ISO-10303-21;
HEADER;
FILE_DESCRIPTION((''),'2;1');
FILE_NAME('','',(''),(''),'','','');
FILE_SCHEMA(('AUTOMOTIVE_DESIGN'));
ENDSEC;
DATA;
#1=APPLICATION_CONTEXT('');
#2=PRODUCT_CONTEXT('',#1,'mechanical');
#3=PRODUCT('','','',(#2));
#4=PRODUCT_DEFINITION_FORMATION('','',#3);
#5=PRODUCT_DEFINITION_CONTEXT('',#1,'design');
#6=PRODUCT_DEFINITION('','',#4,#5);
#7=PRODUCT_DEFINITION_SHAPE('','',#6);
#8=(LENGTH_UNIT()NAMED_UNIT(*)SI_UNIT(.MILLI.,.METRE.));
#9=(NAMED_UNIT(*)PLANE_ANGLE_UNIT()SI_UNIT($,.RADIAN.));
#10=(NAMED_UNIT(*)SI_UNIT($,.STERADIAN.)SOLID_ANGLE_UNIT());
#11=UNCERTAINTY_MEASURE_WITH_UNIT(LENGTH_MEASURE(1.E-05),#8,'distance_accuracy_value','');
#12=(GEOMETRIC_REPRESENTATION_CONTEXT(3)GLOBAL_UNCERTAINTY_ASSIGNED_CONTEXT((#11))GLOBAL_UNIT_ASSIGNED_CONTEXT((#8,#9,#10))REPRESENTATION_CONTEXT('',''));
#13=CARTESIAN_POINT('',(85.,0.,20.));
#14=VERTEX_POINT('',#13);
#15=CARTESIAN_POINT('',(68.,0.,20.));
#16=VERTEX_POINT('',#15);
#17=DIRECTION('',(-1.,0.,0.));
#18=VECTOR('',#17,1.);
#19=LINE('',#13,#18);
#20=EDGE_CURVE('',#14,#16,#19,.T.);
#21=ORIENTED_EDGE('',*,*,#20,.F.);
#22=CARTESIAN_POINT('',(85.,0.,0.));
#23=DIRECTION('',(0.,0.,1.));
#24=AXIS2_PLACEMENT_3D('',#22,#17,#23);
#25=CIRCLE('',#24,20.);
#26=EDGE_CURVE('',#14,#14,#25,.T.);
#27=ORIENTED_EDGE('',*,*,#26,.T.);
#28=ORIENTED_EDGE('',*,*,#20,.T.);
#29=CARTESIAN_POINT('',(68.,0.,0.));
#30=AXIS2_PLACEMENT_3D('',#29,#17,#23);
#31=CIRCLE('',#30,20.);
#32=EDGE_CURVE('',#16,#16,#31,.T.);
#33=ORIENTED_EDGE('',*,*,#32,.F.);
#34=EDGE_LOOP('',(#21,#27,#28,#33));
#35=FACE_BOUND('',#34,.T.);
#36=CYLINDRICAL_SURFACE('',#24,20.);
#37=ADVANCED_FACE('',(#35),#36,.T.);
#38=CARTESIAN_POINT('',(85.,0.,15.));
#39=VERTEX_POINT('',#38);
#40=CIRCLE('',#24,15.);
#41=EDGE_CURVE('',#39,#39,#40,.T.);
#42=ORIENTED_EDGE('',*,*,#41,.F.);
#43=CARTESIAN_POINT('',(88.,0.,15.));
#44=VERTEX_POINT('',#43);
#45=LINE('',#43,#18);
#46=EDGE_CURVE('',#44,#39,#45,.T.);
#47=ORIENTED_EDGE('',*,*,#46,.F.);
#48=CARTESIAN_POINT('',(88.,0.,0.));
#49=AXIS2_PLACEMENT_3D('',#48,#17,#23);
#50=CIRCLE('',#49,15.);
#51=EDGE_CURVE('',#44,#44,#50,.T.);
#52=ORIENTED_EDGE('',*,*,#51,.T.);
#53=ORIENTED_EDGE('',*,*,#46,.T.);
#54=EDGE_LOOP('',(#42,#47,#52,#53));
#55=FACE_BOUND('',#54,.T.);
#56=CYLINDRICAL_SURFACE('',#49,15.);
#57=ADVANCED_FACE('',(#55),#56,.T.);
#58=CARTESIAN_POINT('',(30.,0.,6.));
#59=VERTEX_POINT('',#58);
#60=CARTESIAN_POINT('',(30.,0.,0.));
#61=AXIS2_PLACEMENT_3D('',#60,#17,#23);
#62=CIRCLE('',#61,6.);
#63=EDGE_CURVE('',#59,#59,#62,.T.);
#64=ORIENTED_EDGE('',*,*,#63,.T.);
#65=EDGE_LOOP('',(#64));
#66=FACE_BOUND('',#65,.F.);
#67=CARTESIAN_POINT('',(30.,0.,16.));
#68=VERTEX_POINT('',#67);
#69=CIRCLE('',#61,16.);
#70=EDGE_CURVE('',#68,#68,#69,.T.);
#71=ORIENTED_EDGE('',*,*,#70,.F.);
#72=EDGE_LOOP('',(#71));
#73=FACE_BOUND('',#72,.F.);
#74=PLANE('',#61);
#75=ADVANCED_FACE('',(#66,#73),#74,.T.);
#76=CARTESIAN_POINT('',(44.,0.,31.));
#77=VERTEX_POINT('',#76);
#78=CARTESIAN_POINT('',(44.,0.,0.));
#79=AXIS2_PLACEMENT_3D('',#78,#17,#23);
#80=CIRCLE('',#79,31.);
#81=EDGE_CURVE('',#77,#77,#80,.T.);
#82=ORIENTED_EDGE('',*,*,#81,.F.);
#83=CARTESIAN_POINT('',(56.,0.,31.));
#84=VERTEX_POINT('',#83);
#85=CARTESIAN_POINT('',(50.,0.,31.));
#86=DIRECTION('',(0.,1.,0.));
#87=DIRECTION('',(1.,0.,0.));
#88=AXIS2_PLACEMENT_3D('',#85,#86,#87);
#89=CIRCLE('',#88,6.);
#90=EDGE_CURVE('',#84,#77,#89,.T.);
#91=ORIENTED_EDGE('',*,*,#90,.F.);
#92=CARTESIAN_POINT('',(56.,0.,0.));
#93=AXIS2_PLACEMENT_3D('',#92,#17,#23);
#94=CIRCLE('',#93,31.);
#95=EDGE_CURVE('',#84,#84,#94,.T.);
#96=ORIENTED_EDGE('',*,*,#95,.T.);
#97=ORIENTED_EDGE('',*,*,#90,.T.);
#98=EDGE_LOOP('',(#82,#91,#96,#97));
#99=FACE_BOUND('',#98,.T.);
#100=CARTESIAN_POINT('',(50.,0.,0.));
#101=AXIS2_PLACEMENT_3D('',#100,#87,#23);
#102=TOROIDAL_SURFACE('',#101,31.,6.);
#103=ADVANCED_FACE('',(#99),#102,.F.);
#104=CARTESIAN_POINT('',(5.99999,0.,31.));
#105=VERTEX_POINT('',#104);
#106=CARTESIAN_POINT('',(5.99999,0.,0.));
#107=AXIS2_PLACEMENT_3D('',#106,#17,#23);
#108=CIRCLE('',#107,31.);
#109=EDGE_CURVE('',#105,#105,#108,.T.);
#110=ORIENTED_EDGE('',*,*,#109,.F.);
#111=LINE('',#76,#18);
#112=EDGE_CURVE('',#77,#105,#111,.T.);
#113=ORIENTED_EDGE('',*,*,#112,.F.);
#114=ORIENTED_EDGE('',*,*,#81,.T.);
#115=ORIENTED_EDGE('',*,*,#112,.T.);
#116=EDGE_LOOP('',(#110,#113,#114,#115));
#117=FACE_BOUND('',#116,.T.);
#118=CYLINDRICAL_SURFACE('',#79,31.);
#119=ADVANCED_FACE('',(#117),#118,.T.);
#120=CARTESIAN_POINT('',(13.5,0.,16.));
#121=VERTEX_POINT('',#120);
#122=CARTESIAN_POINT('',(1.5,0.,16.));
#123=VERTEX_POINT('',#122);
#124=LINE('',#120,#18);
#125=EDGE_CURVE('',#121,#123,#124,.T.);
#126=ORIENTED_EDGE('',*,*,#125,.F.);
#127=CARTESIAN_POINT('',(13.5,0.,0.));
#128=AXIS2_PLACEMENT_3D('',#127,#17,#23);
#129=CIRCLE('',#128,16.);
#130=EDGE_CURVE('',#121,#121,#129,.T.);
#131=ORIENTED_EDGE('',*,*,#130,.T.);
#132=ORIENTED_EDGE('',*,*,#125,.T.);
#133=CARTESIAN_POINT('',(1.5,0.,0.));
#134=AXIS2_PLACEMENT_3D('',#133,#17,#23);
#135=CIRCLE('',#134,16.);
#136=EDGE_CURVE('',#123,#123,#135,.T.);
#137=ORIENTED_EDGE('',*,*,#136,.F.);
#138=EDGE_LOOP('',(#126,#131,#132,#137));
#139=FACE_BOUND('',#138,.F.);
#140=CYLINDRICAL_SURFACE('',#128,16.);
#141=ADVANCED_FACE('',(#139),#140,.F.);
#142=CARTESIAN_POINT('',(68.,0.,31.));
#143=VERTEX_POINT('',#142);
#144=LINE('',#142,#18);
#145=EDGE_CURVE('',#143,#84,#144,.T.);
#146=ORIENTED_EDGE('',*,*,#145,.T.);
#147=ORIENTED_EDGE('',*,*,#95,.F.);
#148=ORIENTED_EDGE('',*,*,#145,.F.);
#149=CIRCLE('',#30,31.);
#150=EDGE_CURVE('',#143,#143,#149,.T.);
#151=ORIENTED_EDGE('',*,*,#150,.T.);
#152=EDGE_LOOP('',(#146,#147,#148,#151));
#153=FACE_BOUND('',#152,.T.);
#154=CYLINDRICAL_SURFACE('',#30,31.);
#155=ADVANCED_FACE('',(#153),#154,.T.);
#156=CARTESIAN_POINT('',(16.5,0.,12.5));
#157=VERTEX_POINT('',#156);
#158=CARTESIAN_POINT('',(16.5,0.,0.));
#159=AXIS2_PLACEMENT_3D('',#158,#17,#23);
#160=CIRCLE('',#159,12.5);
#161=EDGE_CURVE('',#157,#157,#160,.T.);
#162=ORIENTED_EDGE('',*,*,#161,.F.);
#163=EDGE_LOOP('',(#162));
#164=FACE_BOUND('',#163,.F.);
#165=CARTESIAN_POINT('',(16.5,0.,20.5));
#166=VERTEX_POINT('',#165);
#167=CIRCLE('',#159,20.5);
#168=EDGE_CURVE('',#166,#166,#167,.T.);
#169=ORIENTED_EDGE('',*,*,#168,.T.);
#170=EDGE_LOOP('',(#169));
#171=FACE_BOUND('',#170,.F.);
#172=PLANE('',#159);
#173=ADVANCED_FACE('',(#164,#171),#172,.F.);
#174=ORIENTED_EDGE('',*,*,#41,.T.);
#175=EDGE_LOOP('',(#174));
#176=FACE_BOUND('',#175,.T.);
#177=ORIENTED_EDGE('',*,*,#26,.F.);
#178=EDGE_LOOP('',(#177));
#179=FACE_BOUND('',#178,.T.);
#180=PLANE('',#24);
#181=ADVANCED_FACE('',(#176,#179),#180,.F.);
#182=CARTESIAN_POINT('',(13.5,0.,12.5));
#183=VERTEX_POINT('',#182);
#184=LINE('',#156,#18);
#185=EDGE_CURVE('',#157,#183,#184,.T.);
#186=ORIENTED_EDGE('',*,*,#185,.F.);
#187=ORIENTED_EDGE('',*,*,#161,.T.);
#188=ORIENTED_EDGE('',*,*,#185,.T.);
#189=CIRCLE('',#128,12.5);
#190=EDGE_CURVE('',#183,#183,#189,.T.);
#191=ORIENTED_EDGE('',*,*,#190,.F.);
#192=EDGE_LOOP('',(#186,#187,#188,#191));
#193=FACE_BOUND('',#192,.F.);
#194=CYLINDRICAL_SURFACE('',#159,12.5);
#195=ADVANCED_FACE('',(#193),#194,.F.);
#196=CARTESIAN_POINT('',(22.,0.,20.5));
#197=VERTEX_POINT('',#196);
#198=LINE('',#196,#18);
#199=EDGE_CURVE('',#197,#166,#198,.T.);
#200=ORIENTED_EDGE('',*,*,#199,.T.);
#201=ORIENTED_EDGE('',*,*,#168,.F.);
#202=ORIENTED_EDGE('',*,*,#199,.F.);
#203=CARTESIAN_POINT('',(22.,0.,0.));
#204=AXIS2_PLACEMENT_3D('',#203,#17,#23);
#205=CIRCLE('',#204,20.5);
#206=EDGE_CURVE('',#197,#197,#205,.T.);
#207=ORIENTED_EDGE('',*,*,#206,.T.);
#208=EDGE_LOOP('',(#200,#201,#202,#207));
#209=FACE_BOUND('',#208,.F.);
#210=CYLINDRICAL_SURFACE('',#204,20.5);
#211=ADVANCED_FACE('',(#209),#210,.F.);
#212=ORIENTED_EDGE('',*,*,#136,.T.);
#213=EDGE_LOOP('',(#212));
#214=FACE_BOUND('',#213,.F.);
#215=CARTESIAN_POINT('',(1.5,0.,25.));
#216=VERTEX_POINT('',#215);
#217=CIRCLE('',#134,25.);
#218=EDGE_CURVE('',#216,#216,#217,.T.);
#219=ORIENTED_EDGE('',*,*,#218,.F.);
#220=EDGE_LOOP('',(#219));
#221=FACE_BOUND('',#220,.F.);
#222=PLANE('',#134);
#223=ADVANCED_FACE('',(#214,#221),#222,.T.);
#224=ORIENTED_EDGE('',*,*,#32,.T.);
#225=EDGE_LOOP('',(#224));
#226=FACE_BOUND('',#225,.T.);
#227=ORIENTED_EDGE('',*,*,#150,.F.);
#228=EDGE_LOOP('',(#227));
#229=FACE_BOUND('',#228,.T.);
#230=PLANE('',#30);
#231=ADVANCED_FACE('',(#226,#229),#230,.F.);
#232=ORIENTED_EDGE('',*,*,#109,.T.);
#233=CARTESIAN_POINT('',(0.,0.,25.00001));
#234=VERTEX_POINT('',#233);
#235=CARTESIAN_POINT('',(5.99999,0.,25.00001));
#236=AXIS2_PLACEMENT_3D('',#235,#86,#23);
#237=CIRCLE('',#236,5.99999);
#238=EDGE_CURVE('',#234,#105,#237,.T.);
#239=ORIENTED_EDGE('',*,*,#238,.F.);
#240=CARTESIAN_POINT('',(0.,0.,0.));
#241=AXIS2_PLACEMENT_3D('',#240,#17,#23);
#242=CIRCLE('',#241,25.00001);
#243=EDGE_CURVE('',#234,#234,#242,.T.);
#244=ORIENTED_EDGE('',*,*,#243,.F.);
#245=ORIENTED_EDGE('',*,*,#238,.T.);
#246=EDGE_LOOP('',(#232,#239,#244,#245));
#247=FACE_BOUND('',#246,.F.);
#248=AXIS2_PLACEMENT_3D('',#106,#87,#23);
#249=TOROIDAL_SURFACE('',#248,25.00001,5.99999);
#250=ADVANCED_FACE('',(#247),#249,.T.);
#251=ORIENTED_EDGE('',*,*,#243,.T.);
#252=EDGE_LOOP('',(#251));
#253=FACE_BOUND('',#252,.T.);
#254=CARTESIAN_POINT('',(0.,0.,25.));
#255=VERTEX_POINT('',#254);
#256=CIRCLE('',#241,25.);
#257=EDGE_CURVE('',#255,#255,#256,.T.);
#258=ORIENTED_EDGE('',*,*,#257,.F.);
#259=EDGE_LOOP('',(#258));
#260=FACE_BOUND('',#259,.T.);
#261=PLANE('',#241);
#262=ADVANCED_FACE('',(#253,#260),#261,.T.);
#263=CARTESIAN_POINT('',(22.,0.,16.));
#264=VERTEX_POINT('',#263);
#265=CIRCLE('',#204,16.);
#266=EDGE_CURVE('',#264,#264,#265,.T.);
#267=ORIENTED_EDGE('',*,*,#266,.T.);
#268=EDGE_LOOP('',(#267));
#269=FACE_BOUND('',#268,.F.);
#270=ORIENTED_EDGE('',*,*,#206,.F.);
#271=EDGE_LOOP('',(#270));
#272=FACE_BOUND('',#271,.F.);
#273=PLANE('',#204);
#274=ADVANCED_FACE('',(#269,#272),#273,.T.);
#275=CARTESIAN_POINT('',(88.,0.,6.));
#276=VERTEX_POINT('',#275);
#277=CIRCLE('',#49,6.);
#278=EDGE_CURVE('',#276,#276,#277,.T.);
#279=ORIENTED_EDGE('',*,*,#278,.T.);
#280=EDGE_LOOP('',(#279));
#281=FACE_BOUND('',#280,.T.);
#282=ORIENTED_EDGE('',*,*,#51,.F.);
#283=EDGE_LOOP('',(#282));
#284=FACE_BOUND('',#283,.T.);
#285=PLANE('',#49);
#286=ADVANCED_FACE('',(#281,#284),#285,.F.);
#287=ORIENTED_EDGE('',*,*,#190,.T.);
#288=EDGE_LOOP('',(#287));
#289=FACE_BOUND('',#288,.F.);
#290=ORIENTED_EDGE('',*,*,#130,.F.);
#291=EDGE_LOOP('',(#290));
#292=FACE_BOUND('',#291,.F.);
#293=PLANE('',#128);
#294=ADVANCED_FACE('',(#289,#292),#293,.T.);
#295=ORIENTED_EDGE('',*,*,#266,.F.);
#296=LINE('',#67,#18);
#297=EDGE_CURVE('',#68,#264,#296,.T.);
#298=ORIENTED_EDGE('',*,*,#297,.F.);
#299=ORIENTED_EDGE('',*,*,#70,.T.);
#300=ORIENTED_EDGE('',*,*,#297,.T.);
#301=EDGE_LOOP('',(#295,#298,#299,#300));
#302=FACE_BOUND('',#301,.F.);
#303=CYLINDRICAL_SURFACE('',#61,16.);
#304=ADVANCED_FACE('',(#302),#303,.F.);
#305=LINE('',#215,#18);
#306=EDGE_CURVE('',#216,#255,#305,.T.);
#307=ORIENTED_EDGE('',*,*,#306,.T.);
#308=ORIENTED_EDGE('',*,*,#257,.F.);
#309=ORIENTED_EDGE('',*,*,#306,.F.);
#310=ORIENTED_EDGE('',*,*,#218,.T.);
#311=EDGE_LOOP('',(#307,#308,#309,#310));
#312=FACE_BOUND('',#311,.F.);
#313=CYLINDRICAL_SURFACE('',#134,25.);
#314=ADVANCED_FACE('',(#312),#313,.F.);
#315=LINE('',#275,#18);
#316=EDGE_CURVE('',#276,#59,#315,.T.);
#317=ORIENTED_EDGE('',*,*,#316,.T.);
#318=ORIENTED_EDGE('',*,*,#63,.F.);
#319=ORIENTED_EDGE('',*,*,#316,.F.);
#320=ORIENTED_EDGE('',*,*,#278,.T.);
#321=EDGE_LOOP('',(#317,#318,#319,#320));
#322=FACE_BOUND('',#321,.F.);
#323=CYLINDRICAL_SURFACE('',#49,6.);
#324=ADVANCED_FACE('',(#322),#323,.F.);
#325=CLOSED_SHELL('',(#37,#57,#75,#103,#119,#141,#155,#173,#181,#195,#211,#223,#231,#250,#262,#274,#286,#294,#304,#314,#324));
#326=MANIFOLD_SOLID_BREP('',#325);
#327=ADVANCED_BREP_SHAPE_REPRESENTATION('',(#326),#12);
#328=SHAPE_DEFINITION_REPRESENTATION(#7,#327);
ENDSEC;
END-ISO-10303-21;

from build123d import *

# Parameters (mm, degrees)
F4_R = 5.99999


# Not quite as in the source:
# - a fillet or chamfer is up to 0.001 mm smaller than in the source, because OpenCascade refuses the exact size


with BuildPart() as f1:
    # F0 (on Front) → F1 (revolve)
    with BuildSketch(Plane.XZ):
        with BuildLine():
            Line((0, 31), (0, 0))
            Line((0, 0), (88, 0))
            Line((88, 0), (88, 15))
            Line((88, 15), (85, 15))
            Line((85, 15), (85, 20))
            Line((85, 20), (68, 20))
            Line((68, 20), (68, 31))
            Line((68, 31), (56, 31))
            ThreePointArc((56, 31), (50, 25), (44, 31))
            Line((44, 31), (0, 31))
        make_face()
    revolve(axis=Axis((44, 0, 0), (-1, 0, 0)))

    # F2 (on Front) → F3 (revolve, cut)
    with BuildSketch(Plane.XZ):
        Polygon((0, 25), (0, 0), (88, 0), (88, 6), (30, 6), (30, 16), (22, 16), (22, 20.5), (16.5, 20.5), (16.5, 12.5), (13.5, 12.5), (13.5, 16), (1.5, 16), (1.5, 25), align=None)
    revolve(axis=Axis((-10.2086656565, 0, 0), (-1, 0, 0)), mode=Mode.SUBTRACT)

    # F4 (radius 6 in the source; OpenCascade refuses exactly that, so slightly less here)
    f4_edges = [f1.edges().sort_by_distance(p)[0] for p in [
        (0, 0, -31),
    ]]
    fillet(f4_edges, radius=F4_R)


solid = f1.part
